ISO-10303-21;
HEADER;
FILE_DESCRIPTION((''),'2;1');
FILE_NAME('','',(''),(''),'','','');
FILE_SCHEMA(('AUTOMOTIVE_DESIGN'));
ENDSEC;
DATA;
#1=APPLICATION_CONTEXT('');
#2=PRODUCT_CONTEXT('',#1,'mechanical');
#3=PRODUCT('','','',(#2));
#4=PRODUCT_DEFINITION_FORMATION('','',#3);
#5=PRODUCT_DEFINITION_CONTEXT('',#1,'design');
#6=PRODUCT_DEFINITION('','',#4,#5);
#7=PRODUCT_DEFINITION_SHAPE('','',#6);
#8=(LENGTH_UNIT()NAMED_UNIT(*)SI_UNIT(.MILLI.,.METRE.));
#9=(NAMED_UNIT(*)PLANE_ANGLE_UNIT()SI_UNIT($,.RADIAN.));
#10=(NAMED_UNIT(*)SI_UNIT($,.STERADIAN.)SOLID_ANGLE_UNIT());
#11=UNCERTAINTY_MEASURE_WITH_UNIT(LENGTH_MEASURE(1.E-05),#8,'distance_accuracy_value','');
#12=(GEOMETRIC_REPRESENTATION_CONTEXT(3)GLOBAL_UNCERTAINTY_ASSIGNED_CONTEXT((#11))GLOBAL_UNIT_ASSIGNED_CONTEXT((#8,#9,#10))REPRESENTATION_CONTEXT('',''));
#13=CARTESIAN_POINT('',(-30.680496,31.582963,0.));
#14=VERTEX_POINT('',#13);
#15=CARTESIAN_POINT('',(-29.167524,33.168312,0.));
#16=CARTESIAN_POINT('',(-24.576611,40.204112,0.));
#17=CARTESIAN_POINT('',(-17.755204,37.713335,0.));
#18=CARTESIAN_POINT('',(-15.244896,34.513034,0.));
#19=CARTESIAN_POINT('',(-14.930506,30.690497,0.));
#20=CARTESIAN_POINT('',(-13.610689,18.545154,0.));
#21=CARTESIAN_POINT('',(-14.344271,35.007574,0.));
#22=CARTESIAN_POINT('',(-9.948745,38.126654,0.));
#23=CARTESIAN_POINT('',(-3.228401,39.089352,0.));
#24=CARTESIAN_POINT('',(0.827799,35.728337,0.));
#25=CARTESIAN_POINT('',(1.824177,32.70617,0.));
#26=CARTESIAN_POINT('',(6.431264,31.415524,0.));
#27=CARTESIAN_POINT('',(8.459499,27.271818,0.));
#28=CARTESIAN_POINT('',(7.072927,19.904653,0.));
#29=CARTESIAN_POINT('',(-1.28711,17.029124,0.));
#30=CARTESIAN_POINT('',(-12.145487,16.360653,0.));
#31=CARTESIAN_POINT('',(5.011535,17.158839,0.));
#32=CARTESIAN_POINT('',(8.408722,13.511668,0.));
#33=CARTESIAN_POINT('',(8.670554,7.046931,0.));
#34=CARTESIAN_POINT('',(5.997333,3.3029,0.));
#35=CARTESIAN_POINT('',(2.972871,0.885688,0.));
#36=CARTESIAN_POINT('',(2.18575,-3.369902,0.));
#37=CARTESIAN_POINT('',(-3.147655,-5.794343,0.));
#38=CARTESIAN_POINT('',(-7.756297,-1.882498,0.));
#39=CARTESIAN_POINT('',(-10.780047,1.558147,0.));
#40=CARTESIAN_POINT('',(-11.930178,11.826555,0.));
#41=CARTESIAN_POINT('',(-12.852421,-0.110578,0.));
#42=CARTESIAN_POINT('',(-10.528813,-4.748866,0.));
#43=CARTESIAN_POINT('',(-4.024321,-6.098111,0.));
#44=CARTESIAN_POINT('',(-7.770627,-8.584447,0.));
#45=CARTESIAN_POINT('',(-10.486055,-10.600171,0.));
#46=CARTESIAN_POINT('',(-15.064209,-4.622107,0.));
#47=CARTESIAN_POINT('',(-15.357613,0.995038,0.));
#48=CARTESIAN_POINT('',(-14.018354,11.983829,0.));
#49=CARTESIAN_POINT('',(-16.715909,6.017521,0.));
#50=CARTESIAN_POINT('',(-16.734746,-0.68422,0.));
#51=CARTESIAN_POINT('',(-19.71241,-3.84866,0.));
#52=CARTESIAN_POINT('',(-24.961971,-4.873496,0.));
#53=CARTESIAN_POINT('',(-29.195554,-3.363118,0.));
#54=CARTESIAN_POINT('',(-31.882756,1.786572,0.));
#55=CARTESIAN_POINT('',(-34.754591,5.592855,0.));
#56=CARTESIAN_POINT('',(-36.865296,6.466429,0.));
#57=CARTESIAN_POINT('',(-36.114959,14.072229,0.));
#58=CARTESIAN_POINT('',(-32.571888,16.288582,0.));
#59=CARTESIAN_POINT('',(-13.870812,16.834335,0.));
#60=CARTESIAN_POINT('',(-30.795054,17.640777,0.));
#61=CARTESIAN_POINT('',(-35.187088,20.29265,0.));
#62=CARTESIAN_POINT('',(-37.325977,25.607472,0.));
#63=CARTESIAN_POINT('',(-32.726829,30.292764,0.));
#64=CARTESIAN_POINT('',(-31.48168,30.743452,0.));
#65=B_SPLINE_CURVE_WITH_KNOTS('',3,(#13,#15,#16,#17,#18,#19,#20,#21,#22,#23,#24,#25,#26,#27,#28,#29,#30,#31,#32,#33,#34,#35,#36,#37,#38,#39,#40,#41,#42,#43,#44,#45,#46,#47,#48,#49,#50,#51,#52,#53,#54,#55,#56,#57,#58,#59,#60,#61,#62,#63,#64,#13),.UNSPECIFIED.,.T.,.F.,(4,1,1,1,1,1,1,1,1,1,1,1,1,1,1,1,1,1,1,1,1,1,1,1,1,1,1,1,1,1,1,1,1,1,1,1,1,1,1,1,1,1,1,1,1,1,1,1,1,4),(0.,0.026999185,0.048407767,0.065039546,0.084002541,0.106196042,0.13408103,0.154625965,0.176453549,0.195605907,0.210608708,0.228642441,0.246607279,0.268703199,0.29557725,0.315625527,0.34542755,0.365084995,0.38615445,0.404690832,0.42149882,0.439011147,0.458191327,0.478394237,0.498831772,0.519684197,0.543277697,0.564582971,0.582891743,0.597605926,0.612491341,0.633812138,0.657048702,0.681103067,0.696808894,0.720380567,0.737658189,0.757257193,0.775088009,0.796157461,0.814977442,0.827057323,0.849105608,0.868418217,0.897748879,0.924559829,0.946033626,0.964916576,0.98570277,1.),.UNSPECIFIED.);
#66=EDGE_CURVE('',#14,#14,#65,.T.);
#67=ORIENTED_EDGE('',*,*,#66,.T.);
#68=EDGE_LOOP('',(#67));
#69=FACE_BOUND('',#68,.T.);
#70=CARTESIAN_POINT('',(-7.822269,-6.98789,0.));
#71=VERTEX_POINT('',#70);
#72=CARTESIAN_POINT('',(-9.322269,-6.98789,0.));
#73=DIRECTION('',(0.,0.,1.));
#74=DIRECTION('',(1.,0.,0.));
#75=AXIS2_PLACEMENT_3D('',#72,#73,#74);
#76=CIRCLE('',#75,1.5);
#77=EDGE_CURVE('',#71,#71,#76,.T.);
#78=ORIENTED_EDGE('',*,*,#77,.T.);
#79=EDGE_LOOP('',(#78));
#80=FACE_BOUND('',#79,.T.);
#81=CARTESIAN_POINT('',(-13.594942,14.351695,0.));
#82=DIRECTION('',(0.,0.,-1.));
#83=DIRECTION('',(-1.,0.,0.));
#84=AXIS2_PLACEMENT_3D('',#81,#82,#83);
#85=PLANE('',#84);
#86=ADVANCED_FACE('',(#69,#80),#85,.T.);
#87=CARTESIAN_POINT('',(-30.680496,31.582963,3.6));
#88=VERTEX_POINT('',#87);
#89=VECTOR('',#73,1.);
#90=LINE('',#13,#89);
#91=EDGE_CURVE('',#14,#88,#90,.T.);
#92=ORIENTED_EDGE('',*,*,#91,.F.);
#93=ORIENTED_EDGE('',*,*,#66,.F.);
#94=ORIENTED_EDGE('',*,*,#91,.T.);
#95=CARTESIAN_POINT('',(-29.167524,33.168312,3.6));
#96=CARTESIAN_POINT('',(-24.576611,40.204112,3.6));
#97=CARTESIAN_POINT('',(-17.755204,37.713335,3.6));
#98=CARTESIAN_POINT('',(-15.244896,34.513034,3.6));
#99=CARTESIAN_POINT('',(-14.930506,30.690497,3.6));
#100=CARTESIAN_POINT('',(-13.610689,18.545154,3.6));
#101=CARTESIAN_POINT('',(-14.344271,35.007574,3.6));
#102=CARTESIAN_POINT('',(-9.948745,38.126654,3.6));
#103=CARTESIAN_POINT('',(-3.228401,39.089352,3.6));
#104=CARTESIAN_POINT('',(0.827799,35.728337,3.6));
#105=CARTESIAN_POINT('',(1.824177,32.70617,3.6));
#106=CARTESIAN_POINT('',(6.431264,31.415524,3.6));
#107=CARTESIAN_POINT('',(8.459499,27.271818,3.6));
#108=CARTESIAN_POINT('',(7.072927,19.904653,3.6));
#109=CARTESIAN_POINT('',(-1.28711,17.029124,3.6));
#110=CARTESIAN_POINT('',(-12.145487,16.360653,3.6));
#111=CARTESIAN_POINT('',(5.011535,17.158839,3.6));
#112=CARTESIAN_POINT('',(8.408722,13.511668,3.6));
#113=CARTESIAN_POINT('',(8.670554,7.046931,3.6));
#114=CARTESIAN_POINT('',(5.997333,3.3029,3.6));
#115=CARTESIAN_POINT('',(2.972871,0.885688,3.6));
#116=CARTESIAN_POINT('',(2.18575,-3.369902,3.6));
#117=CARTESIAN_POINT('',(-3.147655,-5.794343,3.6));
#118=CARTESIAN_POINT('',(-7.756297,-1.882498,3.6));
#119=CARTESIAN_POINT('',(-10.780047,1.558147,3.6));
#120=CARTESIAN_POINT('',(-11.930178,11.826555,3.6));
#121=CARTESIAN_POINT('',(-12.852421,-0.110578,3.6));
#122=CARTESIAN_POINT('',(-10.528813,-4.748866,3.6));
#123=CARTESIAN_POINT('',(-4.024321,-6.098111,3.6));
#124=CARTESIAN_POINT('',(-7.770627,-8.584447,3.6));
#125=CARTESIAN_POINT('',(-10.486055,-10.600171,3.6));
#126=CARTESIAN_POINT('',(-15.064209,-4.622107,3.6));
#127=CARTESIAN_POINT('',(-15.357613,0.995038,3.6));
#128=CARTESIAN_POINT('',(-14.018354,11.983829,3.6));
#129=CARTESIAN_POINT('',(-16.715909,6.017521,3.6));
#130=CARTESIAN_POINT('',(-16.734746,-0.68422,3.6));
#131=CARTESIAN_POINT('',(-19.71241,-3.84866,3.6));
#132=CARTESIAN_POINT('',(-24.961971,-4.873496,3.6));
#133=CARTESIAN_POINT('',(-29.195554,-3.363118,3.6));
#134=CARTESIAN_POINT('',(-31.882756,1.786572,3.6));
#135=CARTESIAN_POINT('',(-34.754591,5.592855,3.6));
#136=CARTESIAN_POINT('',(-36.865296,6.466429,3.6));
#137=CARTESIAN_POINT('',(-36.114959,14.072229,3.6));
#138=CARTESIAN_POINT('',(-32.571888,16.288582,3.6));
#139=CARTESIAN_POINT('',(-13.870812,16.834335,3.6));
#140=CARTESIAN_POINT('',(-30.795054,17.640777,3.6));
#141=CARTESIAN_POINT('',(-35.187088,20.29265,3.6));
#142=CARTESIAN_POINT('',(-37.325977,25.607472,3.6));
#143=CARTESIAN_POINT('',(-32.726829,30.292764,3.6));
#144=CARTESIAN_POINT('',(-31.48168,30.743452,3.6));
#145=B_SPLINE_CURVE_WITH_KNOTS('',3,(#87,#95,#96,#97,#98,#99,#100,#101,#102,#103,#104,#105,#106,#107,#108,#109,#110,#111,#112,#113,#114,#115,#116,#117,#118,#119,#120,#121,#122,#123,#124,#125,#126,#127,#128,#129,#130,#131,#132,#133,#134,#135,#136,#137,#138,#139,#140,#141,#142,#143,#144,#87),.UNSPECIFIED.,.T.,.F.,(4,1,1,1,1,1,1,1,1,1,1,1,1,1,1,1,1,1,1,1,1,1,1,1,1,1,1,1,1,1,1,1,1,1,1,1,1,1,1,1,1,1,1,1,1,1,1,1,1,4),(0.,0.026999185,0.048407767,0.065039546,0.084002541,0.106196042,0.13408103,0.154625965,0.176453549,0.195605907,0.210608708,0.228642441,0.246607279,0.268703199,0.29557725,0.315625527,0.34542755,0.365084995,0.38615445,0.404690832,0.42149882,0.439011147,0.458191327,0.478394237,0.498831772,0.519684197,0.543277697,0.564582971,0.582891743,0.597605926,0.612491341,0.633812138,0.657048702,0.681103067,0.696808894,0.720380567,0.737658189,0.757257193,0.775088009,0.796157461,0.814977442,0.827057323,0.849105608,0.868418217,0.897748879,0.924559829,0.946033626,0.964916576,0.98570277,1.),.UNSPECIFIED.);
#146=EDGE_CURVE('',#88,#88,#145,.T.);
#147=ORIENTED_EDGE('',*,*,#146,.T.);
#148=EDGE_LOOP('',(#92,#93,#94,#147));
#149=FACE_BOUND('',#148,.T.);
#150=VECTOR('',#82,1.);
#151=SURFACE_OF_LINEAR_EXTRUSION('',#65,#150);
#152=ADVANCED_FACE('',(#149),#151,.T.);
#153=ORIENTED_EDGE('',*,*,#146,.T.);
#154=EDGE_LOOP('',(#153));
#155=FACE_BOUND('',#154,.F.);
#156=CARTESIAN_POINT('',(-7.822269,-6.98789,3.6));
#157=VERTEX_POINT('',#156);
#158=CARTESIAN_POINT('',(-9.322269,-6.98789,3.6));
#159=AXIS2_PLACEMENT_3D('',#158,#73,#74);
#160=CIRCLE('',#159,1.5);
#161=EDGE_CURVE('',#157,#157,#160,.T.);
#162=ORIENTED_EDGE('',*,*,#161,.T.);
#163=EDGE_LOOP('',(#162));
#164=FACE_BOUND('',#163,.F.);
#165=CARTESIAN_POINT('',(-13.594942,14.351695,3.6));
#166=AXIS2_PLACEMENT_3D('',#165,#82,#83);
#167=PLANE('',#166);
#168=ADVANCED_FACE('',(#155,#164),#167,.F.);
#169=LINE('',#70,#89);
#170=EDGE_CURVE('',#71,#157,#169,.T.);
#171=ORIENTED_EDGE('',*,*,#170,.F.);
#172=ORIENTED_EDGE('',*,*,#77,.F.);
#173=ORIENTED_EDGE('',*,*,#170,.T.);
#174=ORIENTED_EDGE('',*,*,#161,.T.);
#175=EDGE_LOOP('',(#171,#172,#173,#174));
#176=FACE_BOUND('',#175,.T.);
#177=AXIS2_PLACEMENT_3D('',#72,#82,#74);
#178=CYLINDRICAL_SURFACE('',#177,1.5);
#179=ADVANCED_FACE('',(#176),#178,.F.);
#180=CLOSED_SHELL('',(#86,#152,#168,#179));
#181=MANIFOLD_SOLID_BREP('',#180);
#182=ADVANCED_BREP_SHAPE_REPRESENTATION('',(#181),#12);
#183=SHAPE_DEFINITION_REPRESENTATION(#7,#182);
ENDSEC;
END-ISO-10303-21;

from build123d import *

# Parameters (mm, degrees)
F0_R     = 1.5
F1_DEPTH = 3.6


with BuildPart() as f1:
    # F0 (on Top) → F1 (new body)
    with BuildSketch(Plane.XY):
        with BuildLine():
            add(Edge.make_bspline(
                [(-30.6804964347, 31.582962714), (-29.1675241006, 33.1683116406), (-24.5766114637, 40.2041119836), (-17.7552043061, 37.7133351399), (-15.2448956288, 34.5130337453), (-14.9305064705, 30.6904965563), (-13.6106887962, 18.5451541561), (-14.3442713456, 35.0075738872), (-9.9487450503, 38.1266544345), (-3.2284013313, 39.0893520479), (0.8277993183, 35.7283365925), (1.8241774897, 32.7061701943), (6.4312643442, 31.4155236701), (8.459499043, 27.2718175176), (7.0729270519, 19.9046528379), (-1.2871097748, 17.0291239958), (-12.1454874012, 16.3606527779), (5.0115348488, 17.1588392772), (8.4087215997, 13.5116679061), (8.6705541856, 7.0469306097), (5.9973328421, 3.3029003142), (2.9728708099, 0.8856881591), (2.1857503326, -3.3699017834), (-3.1476545462, -5.7943429048), (-7.7562974509, -1.8824981318), (-10.780047028, 1.5581469324), (-11.9301777081, 11.8265548251), (-12.8524209858, -0.1105781927), (-10.5288130699, -4.7488661744), (-4.0243207571, -6.0981107197), (-7.7706271168, -8.5844472427), (-10.4860550532, -10.6001707727), (-15.0642090598, -4.6221073091), (-15.3576129259, 0.995038079), (-14.0183540343, 11.9838293904), (-16.7159094737, 6.0175211527), (-16.7347455052, -0.6842198121), (-19.7124095527, -3.8486596836), (-24.9619707202, -4.8734961624), (-29.195553996, -3.3631179401), (-31.8827564992, 1.7865724359), (-34.7545908947, 5.5928553158), (-36.8652956954, 6.4664289254), (-36.1149591658, 14.0722286464), (-32.5718884037, 16.2885824506), (-13.8708121692, 16.8343345652), (-30.7950542725, 17.6407765926), (-35.187087623, 20.2926504832), (-37.325976991, 25.6074724242), (-32.7268294715, 30.2927643508), (-31.4816804035, 30.7434522243), (-30.6804964347, 31.582962714)],
                knots=[0, 0, 0, 0, 0.026999185, 0.0484077675, 0.065039546, 0.0840025414, 0.1061960418, 0.1340810298, 0.1546259655, 0.1764535485, 0.1956059066, 0.2106087082, 0.2286424413, 0.2466072793, 0.2687031986, 0.2955772501, 0.3156255266, 0.3454275498, 0.3650849951, 0.3861544498, 0.4046908315, 0.4214988201, 0.4390111469, 0.4581913272, 0.478394237, 0.4988317716, 0.5196841966, 0.5432776965, 0.5645829712, 0.5828917435, 0.5976059263, 0.6124913414, 0.6338121384, 0.6570487017, 0.6811030666, 0.6968088938, 0.7203805666, 0.7376581895, 0.7572571934, 0.7750880091, 0.7961574612, 0.8149774419, 0.8270573228, 0.8491056078, 0.8684182172, 0.8977488788, 0.924559829, 0.9460336257, 0.9649165764, 0.9857027695, 1, 1, 1, 1], degree=3))
        make_face()
        with Locations((-9.3222688884, -6.987889763)):
            Circle(F0_R, mode=Mode.SUBTRACT)
    extrude(amount=F1_DEPTH)


solid = f1.part
